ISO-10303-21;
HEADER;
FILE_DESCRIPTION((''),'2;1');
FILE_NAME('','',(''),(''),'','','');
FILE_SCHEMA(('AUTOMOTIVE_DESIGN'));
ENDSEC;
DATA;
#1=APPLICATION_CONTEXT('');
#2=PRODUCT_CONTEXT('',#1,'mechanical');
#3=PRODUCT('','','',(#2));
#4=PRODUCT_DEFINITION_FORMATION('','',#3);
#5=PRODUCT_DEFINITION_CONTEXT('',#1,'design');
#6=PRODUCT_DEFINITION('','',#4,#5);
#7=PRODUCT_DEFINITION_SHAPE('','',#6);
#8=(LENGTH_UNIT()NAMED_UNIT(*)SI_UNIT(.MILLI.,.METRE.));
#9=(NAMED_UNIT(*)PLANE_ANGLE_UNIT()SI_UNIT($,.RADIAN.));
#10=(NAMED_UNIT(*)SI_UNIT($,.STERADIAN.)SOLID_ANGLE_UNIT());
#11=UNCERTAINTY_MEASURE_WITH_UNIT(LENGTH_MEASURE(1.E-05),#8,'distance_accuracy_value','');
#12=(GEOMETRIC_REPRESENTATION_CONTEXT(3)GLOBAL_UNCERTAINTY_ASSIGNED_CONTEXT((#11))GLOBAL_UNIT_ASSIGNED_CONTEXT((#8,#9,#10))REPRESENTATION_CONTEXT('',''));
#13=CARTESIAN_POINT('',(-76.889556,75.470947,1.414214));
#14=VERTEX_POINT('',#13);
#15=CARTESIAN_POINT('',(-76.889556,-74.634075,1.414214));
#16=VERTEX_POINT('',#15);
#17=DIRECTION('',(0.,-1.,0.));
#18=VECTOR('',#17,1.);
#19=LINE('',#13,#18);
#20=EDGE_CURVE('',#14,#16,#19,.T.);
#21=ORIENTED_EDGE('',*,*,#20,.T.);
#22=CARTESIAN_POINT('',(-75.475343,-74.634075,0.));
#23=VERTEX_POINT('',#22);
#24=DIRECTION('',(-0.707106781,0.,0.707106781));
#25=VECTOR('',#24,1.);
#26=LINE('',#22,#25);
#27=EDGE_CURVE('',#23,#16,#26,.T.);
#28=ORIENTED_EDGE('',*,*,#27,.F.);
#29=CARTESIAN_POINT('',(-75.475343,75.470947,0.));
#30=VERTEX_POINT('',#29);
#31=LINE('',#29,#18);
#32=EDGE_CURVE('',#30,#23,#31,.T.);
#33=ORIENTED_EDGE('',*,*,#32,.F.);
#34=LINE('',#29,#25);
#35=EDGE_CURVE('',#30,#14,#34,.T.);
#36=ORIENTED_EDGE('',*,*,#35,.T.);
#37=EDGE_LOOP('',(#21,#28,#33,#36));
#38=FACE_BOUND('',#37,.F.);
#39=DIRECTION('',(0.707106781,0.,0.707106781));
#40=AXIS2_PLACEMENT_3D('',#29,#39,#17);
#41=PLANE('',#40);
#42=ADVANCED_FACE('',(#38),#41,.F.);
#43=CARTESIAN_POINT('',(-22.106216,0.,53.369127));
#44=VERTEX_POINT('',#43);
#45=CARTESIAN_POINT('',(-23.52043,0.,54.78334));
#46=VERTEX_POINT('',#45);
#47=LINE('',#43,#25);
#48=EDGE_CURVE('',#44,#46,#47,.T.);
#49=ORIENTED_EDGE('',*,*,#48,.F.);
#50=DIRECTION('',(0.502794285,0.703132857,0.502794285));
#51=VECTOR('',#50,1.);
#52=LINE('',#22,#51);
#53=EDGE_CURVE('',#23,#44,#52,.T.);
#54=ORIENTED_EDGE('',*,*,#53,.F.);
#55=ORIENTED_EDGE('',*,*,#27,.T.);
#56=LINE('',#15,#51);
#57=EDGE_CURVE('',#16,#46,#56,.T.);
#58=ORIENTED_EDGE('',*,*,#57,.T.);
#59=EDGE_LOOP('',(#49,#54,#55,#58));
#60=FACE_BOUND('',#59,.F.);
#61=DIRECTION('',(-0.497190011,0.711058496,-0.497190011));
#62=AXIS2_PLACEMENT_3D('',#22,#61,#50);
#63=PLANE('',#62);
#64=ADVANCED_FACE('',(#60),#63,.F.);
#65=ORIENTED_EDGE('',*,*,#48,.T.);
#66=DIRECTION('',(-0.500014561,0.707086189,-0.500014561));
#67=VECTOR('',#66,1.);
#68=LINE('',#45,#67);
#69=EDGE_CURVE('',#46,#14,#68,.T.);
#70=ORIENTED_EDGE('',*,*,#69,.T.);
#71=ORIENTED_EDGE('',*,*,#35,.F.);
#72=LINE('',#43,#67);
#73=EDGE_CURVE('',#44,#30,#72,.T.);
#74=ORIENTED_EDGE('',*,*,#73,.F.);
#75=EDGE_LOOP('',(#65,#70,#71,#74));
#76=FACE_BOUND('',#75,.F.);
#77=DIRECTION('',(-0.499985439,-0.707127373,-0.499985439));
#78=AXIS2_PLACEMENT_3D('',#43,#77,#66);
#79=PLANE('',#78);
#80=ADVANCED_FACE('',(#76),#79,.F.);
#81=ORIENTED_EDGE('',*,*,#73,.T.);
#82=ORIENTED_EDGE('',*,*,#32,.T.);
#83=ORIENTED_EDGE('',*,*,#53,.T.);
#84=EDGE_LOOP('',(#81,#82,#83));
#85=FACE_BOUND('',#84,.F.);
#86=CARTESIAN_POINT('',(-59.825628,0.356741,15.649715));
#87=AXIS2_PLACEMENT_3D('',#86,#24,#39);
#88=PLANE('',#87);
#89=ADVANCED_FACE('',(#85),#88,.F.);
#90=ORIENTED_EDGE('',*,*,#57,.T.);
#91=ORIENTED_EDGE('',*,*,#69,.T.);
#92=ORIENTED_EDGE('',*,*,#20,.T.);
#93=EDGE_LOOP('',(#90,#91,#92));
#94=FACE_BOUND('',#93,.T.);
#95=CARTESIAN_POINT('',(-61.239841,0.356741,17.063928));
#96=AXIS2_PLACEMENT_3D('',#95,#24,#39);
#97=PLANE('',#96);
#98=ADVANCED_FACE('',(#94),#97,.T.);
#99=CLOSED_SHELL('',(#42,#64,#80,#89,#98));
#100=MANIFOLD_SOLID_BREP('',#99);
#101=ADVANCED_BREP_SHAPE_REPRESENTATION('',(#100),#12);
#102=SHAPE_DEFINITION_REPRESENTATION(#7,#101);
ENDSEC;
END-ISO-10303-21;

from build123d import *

# Parameters (mm, degrees)
F2_DEPTH = 2
F3_ANGLE = 45


# Not quite as in the source:
# - a feature of the source that left no trace in its solid (it failed there, or was rolled back) is left out


with BuildPart() as f2:
    # F0 (on Top) → F2 (new body)
    with BuildSketch(Plane.XY):
        Polygon((0, 0), (-75.4753425717, 75.4709467292), (-75.4753425717, -74.6340751648), align=None)
    extrude(amount=F2_DEPTH)


with BuildPart() as f2_1:
    # F3: moved
    add(f2.part.rotate(Axis((-75.4753425717, 0.4184357822, 0), (0, -1, 0)), F3_ANGLE))


solid = f2_1.part
